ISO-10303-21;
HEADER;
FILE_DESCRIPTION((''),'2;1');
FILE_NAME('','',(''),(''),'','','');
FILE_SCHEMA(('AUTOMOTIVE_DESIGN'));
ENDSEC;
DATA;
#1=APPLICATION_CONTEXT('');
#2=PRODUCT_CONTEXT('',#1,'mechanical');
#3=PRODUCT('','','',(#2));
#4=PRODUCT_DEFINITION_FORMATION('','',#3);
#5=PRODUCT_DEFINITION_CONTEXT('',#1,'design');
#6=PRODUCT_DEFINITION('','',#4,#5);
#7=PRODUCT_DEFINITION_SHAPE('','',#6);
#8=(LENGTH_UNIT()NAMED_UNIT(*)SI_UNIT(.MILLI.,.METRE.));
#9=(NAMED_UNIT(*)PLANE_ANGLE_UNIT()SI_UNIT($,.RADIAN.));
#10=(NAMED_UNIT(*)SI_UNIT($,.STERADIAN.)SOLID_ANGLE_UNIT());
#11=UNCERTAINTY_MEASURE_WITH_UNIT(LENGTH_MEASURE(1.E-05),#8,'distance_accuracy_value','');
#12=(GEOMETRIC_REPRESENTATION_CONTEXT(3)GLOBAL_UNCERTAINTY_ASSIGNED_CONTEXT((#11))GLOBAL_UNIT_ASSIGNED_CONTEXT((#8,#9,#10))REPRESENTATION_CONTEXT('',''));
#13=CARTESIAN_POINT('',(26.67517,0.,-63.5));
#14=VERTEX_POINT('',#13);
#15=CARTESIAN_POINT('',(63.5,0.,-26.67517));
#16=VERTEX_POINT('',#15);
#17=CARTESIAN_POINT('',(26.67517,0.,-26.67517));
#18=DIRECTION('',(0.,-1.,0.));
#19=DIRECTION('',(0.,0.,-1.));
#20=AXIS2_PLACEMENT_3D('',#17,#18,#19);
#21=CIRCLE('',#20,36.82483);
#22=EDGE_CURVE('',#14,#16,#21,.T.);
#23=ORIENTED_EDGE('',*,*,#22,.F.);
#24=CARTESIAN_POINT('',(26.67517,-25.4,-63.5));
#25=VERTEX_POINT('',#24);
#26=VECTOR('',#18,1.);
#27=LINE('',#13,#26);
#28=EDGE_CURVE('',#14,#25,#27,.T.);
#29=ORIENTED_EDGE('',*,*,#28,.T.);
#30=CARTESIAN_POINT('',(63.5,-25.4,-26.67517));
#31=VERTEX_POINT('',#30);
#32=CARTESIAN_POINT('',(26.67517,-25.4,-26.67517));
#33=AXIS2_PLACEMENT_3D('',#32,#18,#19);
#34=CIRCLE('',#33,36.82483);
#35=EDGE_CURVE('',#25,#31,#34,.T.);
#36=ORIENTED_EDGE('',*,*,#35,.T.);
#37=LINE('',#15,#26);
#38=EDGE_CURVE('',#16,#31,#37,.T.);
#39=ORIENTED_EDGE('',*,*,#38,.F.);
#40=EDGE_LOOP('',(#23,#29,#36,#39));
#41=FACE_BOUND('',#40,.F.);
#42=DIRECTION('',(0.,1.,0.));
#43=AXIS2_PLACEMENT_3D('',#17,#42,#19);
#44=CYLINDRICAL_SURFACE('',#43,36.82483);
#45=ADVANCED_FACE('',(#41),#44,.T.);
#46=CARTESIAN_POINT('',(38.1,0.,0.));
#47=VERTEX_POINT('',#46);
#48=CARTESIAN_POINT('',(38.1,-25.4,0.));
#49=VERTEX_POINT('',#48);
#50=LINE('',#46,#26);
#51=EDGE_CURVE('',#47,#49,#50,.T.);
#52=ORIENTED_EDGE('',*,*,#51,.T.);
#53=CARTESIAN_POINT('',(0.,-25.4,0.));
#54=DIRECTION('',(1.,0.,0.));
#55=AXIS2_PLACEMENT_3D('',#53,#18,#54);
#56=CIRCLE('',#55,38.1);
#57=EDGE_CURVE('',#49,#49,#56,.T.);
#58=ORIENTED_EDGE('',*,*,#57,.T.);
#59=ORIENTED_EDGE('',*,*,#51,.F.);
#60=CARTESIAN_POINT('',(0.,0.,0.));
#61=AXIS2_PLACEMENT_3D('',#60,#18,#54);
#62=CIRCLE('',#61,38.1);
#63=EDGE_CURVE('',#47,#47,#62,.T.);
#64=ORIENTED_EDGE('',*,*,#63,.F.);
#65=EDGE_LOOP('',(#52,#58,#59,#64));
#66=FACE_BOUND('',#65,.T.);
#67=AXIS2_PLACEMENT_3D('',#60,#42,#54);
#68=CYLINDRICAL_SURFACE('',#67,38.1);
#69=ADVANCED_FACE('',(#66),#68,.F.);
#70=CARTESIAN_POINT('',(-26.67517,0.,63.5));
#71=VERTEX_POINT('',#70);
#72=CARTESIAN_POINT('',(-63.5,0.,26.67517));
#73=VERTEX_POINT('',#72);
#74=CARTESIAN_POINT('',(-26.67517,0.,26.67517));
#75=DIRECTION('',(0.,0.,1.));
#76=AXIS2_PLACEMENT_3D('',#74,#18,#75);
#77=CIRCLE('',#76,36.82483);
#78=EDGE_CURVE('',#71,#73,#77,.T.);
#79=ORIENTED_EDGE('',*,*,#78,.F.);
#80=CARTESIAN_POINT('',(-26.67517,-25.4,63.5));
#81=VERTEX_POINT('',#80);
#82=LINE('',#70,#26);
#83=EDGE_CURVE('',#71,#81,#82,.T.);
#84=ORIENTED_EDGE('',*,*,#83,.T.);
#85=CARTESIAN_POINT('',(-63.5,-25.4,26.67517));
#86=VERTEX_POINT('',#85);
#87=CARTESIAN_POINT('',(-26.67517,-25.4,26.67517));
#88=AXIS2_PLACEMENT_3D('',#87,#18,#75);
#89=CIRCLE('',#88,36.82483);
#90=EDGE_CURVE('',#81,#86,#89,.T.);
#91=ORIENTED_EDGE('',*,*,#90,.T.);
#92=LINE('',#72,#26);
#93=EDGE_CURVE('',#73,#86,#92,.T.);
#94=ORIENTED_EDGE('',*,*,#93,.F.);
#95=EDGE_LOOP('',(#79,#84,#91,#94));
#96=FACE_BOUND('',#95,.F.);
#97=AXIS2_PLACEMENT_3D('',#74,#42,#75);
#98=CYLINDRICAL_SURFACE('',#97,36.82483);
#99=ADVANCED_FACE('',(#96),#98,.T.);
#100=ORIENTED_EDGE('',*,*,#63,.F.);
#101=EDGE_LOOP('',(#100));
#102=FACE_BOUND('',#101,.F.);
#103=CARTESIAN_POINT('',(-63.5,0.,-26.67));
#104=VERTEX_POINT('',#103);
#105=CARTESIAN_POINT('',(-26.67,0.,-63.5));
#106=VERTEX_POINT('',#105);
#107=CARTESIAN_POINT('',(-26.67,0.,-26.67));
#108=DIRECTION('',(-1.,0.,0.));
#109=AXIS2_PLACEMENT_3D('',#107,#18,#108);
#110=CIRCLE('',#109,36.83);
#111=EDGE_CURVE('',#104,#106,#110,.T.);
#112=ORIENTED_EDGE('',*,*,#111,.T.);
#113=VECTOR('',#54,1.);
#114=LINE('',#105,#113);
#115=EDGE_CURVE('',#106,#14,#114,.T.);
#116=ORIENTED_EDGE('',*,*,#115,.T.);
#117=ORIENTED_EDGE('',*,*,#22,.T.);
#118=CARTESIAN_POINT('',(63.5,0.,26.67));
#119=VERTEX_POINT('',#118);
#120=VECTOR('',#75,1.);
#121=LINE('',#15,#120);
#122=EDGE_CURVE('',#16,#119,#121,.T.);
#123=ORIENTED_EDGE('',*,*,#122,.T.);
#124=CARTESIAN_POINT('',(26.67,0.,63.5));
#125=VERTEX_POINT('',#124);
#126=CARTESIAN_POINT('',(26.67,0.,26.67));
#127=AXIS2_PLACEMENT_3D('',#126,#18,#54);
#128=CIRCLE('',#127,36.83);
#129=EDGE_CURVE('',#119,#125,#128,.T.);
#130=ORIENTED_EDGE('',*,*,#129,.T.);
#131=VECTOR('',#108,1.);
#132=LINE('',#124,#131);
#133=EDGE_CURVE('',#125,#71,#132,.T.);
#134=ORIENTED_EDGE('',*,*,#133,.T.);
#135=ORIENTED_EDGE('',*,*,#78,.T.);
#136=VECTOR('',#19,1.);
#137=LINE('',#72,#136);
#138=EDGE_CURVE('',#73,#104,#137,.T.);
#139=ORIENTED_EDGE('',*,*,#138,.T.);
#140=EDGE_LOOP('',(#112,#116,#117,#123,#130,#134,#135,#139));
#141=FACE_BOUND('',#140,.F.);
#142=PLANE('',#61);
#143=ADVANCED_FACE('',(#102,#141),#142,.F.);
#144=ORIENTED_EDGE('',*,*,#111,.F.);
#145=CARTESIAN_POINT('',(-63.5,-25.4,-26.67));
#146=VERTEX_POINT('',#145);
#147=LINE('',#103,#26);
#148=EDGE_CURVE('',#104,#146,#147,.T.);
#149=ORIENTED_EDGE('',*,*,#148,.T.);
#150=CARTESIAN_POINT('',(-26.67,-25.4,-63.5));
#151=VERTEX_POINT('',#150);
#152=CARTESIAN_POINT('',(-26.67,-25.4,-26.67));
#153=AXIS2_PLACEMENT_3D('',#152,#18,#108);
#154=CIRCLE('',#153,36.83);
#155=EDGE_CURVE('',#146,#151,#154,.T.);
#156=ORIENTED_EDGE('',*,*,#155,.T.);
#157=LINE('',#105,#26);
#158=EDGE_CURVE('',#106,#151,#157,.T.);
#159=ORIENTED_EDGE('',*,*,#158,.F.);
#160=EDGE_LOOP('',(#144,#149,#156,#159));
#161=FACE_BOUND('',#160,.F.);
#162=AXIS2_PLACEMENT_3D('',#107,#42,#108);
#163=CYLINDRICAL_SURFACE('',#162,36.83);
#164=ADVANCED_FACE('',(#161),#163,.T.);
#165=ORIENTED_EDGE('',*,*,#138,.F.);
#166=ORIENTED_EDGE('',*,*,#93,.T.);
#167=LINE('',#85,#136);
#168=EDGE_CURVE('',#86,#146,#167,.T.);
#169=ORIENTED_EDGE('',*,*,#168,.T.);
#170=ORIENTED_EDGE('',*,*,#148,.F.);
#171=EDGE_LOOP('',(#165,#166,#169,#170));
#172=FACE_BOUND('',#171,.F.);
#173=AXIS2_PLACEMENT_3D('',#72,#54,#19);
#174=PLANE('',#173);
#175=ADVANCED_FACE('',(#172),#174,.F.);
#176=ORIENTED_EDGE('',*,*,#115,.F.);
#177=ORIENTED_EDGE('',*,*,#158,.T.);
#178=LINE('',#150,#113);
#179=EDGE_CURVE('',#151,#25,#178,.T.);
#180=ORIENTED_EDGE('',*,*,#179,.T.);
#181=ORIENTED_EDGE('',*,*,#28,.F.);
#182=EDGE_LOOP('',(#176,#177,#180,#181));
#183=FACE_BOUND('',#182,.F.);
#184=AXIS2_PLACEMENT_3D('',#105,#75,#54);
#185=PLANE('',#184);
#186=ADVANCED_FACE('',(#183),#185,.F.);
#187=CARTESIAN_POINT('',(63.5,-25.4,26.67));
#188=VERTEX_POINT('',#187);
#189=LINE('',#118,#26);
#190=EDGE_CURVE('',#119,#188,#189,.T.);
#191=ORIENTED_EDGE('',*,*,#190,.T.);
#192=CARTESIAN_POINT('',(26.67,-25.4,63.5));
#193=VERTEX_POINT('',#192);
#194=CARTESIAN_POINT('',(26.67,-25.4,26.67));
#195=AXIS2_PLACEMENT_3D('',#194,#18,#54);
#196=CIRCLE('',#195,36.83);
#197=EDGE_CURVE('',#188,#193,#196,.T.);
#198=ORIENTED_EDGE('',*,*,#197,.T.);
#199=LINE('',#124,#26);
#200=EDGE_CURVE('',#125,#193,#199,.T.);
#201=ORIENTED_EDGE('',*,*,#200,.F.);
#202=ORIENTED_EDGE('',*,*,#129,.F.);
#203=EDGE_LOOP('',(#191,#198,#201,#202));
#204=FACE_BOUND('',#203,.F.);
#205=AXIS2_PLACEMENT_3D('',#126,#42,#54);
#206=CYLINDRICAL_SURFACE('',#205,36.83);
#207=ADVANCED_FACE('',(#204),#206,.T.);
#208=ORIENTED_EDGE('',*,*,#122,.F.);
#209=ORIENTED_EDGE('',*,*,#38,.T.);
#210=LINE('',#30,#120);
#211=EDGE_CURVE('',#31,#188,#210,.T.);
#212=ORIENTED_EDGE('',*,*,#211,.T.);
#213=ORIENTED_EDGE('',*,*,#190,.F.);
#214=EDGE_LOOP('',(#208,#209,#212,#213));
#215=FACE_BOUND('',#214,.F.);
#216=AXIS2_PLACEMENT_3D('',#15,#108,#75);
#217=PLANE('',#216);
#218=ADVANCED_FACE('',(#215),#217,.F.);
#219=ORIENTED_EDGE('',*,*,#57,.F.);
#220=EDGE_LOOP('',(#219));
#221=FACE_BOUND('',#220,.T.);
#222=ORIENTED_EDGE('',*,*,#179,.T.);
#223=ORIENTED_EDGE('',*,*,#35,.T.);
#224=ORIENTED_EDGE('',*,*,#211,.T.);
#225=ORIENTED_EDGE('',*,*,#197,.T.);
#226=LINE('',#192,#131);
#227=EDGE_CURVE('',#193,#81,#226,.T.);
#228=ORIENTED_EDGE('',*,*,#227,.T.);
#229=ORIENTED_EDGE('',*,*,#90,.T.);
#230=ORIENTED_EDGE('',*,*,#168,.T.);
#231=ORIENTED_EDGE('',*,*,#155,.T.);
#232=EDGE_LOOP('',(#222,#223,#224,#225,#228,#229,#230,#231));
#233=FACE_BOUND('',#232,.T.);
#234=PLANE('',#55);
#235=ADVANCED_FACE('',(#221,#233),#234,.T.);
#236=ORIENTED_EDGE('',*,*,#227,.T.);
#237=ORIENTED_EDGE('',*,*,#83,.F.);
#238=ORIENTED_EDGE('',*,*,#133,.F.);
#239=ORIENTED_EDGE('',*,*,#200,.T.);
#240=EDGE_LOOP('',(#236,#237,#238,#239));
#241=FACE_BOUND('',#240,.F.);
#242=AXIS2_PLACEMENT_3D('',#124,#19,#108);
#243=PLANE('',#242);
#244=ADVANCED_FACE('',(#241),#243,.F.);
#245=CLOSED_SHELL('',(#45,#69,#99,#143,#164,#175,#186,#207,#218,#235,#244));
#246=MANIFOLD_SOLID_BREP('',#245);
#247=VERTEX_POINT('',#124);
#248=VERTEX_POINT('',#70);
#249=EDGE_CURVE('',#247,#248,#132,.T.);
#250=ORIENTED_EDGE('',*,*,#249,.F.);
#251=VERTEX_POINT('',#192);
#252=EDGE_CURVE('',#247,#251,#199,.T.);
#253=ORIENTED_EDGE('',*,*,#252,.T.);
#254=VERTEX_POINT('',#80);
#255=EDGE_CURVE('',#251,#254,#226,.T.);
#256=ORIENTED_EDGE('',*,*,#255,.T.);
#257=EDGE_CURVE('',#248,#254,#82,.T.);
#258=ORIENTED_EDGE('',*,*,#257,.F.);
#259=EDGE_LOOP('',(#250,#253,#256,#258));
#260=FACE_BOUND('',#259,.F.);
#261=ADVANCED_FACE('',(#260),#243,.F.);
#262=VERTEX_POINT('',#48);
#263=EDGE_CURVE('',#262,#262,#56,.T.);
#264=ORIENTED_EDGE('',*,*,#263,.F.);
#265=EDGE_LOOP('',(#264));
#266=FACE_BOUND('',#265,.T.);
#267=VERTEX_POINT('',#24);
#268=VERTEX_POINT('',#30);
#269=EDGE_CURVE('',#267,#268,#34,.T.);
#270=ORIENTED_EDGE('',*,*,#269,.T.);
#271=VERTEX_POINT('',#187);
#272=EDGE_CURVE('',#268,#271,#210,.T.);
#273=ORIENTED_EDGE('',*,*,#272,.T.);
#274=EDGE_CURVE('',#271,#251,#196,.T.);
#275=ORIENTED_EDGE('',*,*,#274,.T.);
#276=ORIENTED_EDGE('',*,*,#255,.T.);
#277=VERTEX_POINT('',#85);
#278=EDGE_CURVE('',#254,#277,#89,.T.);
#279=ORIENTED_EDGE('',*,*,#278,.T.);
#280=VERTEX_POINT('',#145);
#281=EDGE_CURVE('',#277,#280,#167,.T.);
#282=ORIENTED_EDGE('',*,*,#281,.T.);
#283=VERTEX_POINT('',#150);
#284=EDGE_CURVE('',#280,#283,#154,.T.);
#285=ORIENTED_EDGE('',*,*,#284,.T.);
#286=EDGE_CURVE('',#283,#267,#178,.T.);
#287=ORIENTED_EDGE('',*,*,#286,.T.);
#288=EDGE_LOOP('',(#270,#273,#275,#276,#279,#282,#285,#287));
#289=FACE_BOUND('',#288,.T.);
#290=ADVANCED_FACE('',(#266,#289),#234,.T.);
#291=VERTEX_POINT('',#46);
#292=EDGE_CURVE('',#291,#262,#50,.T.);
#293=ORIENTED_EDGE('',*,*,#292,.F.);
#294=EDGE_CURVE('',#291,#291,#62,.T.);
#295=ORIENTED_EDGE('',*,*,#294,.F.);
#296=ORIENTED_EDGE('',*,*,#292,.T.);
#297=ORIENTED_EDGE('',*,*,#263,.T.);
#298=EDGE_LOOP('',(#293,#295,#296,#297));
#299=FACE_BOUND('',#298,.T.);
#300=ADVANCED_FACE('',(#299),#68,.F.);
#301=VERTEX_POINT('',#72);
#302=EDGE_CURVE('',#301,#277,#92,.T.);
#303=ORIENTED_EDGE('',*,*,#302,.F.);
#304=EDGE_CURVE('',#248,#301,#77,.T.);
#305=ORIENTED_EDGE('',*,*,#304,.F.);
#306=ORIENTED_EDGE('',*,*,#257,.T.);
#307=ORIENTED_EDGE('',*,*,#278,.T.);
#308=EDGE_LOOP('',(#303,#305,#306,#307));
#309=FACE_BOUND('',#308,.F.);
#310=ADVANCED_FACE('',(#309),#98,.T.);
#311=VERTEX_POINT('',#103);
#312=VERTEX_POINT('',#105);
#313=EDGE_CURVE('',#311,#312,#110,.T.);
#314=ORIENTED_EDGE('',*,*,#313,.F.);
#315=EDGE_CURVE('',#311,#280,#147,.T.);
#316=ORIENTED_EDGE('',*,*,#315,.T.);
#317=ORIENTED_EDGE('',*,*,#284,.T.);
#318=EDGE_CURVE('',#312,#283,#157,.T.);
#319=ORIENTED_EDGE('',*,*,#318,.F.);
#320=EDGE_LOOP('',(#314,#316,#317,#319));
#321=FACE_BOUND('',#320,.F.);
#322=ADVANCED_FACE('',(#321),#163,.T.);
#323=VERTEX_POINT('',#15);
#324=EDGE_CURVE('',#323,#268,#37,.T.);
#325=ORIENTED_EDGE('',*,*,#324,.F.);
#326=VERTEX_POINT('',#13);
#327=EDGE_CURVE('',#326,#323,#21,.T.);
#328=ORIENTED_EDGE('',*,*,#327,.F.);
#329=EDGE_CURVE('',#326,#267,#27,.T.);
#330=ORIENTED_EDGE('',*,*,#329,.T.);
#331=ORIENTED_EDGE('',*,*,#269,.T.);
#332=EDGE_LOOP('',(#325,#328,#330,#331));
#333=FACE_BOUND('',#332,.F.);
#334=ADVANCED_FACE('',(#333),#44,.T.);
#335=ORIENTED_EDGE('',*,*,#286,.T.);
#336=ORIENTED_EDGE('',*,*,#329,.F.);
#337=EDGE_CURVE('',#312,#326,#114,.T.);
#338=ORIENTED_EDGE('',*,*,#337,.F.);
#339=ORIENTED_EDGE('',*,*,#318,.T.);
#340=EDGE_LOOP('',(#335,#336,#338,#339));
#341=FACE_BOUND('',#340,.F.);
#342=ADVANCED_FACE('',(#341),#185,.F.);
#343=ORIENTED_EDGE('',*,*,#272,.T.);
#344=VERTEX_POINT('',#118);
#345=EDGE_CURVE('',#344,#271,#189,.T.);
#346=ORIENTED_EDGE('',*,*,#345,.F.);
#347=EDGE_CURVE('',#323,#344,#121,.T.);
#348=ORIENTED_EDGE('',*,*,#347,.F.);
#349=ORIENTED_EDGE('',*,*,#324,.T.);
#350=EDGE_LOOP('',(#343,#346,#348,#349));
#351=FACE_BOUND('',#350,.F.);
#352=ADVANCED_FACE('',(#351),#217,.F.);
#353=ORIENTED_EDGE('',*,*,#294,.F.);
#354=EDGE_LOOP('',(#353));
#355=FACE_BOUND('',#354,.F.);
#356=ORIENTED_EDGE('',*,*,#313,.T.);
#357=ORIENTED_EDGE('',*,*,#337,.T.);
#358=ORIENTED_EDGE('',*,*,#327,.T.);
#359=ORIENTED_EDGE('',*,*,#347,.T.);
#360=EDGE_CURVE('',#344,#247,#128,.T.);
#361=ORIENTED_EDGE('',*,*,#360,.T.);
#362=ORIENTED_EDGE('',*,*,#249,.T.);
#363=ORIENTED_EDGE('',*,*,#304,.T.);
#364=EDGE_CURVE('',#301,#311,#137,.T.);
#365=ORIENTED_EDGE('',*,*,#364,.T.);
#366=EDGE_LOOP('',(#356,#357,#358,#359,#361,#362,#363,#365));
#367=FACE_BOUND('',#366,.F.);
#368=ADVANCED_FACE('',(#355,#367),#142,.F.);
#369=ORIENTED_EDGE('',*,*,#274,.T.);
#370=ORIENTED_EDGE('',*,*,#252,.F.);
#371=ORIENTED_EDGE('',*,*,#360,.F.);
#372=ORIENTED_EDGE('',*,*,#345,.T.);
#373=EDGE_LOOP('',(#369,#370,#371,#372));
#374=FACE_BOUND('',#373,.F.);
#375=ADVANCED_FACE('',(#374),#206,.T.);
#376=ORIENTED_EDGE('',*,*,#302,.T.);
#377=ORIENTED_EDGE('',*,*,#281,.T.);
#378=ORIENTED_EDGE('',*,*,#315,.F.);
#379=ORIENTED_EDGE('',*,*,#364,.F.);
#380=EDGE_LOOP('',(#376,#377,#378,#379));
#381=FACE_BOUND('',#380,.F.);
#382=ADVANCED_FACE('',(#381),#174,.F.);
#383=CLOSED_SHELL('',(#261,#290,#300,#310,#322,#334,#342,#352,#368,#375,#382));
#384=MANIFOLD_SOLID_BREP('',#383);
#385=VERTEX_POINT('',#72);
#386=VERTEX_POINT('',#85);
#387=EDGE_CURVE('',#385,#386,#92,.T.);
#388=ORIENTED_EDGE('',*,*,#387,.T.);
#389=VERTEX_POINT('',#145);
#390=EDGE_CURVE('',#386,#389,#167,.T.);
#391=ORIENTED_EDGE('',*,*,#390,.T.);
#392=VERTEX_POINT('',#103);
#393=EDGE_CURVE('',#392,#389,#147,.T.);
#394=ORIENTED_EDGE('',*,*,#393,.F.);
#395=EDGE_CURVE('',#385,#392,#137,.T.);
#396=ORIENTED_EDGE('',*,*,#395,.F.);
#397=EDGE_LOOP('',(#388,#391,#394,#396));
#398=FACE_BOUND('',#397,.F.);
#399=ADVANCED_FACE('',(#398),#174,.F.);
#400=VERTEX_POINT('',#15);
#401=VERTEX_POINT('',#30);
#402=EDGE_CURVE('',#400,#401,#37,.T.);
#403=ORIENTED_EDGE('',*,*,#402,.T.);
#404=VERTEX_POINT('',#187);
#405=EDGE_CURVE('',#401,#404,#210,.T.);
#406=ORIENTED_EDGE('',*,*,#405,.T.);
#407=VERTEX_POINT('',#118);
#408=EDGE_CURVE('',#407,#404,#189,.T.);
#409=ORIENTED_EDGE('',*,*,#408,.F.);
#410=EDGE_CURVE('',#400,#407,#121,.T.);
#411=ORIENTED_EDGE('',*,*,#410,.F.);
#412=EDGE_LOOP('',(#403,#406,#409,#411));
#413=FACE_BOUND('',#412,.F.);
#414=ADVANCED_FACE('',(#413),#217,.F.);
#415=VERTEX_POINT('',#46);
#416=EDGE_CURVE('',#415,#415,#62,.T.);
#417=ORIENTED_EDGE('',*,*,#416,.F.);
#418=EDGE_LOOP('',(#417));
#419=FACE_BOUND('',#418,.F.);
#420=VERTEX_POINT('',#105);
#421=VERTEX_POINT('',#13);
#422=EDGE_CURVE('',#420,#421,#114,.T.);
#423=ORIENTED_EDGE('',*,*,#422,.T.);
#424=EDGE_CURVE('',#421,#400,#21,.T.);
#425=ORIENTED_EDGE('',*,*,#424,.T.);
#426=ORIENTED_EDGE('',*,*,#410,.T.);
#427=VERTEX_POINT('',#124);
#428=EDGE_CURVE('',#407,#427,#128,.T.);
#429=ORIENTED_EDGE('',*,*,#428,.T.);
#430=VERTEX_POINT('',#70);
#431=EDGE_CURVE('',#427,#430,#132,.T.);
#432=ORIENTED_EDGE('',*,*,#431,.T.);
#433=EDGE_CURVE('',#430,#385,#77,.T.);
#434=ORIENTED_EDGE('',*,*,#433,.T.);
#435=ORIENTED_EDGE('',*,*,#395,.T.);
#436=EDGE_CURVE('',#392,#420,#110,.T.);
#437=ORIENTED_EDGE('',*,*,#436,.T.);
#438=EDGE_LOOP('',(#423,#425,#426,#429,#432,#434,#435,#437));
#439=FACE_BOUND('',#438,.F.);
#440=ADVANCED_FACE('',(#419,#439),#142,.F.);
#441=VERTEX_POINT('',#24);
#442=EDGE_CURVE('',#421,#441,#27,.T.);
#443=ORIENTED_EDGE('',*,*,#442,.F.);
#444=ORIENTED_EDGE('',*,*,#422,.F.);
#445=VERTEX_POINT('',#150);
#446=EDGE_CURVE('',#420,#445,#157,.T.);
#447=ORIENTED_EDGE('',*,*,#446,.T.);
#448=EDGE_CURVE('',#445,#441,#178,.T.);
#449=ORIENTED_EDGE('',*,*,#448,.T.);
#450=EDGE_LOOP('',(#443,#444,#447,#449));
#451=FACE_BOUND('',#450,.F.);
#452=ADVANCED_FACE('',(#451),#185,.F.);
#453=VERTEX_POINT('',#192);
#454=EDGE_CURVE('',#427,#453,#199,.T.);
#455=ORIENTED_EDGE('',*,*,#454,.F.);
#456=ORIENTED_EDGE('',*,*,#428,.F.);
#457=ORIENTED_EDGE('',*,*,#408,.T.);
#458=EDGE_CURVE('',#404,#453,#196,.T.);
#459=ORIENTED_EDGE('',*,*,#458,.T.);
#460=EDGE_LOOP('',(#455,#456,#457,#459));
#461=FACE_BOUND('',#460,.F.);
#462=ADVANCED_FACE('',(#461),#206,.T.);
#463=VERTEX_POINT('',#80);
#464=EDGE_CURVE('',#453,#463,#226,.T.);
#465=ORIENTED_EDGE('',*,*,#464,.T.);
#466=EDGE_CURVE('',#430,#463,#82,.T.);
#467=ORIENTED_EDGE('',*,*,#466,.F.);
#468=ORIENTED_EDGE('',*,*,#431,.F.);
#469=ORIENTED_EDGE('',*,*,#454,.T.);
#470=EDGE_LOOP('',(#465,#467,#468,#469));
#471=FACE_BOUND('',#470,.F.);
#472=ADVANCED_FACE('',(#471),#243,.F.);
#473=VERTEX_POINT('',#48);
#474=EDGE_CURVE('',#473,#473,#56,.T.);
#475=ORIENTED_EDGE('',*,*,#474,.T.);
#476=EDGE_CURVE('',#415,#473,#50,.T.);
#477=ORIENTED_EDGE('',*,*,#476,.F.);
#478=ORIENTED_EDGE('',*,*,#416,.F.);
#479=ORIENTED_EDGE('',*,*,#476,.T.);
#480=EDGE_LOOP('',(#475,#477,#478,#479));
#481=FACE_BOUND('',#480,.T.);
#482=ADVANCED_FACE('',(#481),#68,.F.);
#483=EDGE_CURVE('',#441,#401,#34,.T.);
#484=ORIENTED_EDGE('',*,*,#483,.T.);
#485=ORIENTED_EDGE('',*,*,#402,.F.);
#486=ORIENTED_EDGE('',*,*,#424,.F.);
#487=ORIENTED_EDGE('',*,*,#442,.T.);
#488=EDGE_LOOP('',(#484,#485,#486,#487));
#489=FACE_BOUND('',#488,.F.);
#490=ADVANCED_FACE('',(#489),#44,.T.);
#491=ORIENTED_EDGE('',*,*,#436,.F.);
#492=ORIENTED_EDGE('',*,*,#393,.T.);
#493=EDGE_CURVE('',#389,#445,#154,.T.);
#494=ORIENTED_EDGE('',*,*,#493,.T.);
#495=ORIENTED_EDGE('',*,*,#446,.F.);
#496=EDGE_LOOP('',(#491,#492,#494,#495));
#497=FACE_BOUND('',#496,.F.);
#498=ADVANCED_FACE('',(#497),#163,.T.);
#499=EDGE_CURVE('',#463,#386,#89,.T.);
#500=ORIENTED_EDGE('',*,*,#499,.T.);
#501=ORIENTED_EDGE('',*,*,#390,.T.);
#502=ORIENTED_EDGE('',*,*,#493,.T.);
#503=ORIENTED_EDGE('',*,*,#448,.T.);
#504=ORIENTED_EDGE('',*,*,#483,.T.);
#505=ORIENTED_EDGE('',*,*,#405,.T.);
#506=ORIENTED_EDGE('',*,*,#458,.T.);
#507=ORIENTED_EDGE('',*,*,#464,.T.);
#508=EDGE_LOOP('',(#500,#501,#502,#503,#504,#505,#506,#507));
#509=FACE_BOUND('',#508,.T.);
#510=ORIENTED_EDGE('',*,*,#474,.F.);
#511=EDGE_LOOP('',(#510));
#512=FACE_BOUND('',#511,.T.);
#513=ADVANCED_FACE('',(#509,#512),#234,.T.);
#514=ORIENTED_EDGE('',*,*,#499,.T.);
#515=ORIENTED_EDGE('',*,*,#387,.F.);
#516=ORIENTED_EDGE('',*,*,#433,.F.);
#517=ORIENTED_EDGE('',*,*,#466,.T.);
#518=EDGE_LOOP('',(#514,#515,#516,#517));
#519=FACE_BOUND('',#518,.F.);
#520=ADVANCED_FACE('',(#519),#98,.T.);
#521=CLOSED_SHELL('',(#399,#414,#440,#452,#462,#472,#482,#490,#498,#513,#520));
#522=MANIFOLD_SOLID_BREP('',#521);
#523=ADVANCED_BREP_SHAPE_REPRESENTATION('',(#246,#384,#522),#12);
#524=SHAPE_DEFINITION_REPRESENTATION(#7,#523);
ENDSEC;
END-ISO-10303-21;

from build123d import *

# Parameters (mm, degrees)
F0_R     = 38.1
F2_DEPTH = 25.4
F3_DEPTH = 25.4
F4_DEPTH = 25.4


# Not quite as in the source:
# - the program builds the solid bodies; features that only make, move or delete a surface that nothing else refers to are left out


with BuildPart() as f2:
    # F0 (on Front) → F2 (new body)
    with BuildSketch(Plane.XZ):
        with BuildLine():
            Line((26.67, 63.5), (-26.6751700985, 63.5))
            ThreePointArc((-26.6751700985, 63.5), (-52.7142570379, 52.7142570379), (-63.5, 26.6751700985))
            Line((-63.5, 26.6751700985), (-63.5, -26.67))
            ThreePointArc((-63.5, -26.67), (-52.7127427511, -52.7127427511), (-26.67, -63.5))
            Line((-26.67, -63.5), (26.6751700985, -63.5))
            ThreePointArc((26.6751700985, -63.5), (52.7142570379, -52.7142570379), (63.5, -26.6751700985))
            Line((63.5, -26.6751700985), (63.5, 26.67))
            ThreePointArc((63.5, 26.67), (52.7127427511, 52.7127427511), (26.67, 63.5))
        make_face()
        Circle(F0_R, mode=Mode.SUBTRACT)
    extrude(amount=F2_DEPTH)


with BuildPart() as f3:
    # F0 (on Front) → F3 (new body)
    with BuildSketch(Plane.XZ):
        with BuildLine():
            Line((26.67, 63.5), (-26.6751700985, 63.5))
            ThreePointArc((-26.6751700985, 63.5), (-52.7142570379, 52.7142570379), (-63.5, 26.6751700985))
            Line((-63.5, 26.6751700985), (-63.5, -26.67))
            ThreePointArc((-63.5, -26.67), (-52.7127427511, -52.7127427511), (-26.67, -63.5))
            Line((-26.67, -63.5), (26.6751700985, -63.5))
            ThreePointArc((26.6751700985, -63.5), (52.7142570379, -52.7142570379), (63.5, -26.6751700985))
            Line((63.5, -26.6751700985), (63.5, 26.67))
            ThreePointArc((63.5, 26.67), (52.7127427511, 52.7127427511), (26.67, 63.5))
        make_face()
        Circle(F0_R, mode=Mode.SUBTRACT)
    extrude(amount=F3_DEPTH)


with BuildPart() as f4:
    # F0 (on Front) → F4 (new body)
    with BuildSketch(Plane.XZ):
        with BuildLine():
            Line((26.67, 63.5), (-26.6751700985, 63.5))
            ThreePointArc((-26.6751700985, 63.5), (-52.7142570379, 52.7142570379), (-63.5, 26.6751700985))
            Line((-63.5, 26.6751700985), (-63.5, -26.67))
            ThreePointArc((-63.5, -26.67), (-52.7127427511, -52.7127427511), (-26.67, -63.5))
            Line((-26.67, -63.5), (26.6751700985, -63.5))
            ThreePointArc((26.6751700985, -63.5), (52.7142570379, -52.7142570379), (63.5, -26.6751700985))
            Line((63.5, -26.6751700985), (63.5, 26.67))
            ThreePointArc((63.5, 26.67), (52.7127427511, 52.7127427511), (26.67, 63.5))
        make_face()
        Circle(F0_R, mode=Mode.SUBTRACT)
    extrude(amount=F4_DEPTH)


solid = Compound([f2.part, f3.part, f4.part])
